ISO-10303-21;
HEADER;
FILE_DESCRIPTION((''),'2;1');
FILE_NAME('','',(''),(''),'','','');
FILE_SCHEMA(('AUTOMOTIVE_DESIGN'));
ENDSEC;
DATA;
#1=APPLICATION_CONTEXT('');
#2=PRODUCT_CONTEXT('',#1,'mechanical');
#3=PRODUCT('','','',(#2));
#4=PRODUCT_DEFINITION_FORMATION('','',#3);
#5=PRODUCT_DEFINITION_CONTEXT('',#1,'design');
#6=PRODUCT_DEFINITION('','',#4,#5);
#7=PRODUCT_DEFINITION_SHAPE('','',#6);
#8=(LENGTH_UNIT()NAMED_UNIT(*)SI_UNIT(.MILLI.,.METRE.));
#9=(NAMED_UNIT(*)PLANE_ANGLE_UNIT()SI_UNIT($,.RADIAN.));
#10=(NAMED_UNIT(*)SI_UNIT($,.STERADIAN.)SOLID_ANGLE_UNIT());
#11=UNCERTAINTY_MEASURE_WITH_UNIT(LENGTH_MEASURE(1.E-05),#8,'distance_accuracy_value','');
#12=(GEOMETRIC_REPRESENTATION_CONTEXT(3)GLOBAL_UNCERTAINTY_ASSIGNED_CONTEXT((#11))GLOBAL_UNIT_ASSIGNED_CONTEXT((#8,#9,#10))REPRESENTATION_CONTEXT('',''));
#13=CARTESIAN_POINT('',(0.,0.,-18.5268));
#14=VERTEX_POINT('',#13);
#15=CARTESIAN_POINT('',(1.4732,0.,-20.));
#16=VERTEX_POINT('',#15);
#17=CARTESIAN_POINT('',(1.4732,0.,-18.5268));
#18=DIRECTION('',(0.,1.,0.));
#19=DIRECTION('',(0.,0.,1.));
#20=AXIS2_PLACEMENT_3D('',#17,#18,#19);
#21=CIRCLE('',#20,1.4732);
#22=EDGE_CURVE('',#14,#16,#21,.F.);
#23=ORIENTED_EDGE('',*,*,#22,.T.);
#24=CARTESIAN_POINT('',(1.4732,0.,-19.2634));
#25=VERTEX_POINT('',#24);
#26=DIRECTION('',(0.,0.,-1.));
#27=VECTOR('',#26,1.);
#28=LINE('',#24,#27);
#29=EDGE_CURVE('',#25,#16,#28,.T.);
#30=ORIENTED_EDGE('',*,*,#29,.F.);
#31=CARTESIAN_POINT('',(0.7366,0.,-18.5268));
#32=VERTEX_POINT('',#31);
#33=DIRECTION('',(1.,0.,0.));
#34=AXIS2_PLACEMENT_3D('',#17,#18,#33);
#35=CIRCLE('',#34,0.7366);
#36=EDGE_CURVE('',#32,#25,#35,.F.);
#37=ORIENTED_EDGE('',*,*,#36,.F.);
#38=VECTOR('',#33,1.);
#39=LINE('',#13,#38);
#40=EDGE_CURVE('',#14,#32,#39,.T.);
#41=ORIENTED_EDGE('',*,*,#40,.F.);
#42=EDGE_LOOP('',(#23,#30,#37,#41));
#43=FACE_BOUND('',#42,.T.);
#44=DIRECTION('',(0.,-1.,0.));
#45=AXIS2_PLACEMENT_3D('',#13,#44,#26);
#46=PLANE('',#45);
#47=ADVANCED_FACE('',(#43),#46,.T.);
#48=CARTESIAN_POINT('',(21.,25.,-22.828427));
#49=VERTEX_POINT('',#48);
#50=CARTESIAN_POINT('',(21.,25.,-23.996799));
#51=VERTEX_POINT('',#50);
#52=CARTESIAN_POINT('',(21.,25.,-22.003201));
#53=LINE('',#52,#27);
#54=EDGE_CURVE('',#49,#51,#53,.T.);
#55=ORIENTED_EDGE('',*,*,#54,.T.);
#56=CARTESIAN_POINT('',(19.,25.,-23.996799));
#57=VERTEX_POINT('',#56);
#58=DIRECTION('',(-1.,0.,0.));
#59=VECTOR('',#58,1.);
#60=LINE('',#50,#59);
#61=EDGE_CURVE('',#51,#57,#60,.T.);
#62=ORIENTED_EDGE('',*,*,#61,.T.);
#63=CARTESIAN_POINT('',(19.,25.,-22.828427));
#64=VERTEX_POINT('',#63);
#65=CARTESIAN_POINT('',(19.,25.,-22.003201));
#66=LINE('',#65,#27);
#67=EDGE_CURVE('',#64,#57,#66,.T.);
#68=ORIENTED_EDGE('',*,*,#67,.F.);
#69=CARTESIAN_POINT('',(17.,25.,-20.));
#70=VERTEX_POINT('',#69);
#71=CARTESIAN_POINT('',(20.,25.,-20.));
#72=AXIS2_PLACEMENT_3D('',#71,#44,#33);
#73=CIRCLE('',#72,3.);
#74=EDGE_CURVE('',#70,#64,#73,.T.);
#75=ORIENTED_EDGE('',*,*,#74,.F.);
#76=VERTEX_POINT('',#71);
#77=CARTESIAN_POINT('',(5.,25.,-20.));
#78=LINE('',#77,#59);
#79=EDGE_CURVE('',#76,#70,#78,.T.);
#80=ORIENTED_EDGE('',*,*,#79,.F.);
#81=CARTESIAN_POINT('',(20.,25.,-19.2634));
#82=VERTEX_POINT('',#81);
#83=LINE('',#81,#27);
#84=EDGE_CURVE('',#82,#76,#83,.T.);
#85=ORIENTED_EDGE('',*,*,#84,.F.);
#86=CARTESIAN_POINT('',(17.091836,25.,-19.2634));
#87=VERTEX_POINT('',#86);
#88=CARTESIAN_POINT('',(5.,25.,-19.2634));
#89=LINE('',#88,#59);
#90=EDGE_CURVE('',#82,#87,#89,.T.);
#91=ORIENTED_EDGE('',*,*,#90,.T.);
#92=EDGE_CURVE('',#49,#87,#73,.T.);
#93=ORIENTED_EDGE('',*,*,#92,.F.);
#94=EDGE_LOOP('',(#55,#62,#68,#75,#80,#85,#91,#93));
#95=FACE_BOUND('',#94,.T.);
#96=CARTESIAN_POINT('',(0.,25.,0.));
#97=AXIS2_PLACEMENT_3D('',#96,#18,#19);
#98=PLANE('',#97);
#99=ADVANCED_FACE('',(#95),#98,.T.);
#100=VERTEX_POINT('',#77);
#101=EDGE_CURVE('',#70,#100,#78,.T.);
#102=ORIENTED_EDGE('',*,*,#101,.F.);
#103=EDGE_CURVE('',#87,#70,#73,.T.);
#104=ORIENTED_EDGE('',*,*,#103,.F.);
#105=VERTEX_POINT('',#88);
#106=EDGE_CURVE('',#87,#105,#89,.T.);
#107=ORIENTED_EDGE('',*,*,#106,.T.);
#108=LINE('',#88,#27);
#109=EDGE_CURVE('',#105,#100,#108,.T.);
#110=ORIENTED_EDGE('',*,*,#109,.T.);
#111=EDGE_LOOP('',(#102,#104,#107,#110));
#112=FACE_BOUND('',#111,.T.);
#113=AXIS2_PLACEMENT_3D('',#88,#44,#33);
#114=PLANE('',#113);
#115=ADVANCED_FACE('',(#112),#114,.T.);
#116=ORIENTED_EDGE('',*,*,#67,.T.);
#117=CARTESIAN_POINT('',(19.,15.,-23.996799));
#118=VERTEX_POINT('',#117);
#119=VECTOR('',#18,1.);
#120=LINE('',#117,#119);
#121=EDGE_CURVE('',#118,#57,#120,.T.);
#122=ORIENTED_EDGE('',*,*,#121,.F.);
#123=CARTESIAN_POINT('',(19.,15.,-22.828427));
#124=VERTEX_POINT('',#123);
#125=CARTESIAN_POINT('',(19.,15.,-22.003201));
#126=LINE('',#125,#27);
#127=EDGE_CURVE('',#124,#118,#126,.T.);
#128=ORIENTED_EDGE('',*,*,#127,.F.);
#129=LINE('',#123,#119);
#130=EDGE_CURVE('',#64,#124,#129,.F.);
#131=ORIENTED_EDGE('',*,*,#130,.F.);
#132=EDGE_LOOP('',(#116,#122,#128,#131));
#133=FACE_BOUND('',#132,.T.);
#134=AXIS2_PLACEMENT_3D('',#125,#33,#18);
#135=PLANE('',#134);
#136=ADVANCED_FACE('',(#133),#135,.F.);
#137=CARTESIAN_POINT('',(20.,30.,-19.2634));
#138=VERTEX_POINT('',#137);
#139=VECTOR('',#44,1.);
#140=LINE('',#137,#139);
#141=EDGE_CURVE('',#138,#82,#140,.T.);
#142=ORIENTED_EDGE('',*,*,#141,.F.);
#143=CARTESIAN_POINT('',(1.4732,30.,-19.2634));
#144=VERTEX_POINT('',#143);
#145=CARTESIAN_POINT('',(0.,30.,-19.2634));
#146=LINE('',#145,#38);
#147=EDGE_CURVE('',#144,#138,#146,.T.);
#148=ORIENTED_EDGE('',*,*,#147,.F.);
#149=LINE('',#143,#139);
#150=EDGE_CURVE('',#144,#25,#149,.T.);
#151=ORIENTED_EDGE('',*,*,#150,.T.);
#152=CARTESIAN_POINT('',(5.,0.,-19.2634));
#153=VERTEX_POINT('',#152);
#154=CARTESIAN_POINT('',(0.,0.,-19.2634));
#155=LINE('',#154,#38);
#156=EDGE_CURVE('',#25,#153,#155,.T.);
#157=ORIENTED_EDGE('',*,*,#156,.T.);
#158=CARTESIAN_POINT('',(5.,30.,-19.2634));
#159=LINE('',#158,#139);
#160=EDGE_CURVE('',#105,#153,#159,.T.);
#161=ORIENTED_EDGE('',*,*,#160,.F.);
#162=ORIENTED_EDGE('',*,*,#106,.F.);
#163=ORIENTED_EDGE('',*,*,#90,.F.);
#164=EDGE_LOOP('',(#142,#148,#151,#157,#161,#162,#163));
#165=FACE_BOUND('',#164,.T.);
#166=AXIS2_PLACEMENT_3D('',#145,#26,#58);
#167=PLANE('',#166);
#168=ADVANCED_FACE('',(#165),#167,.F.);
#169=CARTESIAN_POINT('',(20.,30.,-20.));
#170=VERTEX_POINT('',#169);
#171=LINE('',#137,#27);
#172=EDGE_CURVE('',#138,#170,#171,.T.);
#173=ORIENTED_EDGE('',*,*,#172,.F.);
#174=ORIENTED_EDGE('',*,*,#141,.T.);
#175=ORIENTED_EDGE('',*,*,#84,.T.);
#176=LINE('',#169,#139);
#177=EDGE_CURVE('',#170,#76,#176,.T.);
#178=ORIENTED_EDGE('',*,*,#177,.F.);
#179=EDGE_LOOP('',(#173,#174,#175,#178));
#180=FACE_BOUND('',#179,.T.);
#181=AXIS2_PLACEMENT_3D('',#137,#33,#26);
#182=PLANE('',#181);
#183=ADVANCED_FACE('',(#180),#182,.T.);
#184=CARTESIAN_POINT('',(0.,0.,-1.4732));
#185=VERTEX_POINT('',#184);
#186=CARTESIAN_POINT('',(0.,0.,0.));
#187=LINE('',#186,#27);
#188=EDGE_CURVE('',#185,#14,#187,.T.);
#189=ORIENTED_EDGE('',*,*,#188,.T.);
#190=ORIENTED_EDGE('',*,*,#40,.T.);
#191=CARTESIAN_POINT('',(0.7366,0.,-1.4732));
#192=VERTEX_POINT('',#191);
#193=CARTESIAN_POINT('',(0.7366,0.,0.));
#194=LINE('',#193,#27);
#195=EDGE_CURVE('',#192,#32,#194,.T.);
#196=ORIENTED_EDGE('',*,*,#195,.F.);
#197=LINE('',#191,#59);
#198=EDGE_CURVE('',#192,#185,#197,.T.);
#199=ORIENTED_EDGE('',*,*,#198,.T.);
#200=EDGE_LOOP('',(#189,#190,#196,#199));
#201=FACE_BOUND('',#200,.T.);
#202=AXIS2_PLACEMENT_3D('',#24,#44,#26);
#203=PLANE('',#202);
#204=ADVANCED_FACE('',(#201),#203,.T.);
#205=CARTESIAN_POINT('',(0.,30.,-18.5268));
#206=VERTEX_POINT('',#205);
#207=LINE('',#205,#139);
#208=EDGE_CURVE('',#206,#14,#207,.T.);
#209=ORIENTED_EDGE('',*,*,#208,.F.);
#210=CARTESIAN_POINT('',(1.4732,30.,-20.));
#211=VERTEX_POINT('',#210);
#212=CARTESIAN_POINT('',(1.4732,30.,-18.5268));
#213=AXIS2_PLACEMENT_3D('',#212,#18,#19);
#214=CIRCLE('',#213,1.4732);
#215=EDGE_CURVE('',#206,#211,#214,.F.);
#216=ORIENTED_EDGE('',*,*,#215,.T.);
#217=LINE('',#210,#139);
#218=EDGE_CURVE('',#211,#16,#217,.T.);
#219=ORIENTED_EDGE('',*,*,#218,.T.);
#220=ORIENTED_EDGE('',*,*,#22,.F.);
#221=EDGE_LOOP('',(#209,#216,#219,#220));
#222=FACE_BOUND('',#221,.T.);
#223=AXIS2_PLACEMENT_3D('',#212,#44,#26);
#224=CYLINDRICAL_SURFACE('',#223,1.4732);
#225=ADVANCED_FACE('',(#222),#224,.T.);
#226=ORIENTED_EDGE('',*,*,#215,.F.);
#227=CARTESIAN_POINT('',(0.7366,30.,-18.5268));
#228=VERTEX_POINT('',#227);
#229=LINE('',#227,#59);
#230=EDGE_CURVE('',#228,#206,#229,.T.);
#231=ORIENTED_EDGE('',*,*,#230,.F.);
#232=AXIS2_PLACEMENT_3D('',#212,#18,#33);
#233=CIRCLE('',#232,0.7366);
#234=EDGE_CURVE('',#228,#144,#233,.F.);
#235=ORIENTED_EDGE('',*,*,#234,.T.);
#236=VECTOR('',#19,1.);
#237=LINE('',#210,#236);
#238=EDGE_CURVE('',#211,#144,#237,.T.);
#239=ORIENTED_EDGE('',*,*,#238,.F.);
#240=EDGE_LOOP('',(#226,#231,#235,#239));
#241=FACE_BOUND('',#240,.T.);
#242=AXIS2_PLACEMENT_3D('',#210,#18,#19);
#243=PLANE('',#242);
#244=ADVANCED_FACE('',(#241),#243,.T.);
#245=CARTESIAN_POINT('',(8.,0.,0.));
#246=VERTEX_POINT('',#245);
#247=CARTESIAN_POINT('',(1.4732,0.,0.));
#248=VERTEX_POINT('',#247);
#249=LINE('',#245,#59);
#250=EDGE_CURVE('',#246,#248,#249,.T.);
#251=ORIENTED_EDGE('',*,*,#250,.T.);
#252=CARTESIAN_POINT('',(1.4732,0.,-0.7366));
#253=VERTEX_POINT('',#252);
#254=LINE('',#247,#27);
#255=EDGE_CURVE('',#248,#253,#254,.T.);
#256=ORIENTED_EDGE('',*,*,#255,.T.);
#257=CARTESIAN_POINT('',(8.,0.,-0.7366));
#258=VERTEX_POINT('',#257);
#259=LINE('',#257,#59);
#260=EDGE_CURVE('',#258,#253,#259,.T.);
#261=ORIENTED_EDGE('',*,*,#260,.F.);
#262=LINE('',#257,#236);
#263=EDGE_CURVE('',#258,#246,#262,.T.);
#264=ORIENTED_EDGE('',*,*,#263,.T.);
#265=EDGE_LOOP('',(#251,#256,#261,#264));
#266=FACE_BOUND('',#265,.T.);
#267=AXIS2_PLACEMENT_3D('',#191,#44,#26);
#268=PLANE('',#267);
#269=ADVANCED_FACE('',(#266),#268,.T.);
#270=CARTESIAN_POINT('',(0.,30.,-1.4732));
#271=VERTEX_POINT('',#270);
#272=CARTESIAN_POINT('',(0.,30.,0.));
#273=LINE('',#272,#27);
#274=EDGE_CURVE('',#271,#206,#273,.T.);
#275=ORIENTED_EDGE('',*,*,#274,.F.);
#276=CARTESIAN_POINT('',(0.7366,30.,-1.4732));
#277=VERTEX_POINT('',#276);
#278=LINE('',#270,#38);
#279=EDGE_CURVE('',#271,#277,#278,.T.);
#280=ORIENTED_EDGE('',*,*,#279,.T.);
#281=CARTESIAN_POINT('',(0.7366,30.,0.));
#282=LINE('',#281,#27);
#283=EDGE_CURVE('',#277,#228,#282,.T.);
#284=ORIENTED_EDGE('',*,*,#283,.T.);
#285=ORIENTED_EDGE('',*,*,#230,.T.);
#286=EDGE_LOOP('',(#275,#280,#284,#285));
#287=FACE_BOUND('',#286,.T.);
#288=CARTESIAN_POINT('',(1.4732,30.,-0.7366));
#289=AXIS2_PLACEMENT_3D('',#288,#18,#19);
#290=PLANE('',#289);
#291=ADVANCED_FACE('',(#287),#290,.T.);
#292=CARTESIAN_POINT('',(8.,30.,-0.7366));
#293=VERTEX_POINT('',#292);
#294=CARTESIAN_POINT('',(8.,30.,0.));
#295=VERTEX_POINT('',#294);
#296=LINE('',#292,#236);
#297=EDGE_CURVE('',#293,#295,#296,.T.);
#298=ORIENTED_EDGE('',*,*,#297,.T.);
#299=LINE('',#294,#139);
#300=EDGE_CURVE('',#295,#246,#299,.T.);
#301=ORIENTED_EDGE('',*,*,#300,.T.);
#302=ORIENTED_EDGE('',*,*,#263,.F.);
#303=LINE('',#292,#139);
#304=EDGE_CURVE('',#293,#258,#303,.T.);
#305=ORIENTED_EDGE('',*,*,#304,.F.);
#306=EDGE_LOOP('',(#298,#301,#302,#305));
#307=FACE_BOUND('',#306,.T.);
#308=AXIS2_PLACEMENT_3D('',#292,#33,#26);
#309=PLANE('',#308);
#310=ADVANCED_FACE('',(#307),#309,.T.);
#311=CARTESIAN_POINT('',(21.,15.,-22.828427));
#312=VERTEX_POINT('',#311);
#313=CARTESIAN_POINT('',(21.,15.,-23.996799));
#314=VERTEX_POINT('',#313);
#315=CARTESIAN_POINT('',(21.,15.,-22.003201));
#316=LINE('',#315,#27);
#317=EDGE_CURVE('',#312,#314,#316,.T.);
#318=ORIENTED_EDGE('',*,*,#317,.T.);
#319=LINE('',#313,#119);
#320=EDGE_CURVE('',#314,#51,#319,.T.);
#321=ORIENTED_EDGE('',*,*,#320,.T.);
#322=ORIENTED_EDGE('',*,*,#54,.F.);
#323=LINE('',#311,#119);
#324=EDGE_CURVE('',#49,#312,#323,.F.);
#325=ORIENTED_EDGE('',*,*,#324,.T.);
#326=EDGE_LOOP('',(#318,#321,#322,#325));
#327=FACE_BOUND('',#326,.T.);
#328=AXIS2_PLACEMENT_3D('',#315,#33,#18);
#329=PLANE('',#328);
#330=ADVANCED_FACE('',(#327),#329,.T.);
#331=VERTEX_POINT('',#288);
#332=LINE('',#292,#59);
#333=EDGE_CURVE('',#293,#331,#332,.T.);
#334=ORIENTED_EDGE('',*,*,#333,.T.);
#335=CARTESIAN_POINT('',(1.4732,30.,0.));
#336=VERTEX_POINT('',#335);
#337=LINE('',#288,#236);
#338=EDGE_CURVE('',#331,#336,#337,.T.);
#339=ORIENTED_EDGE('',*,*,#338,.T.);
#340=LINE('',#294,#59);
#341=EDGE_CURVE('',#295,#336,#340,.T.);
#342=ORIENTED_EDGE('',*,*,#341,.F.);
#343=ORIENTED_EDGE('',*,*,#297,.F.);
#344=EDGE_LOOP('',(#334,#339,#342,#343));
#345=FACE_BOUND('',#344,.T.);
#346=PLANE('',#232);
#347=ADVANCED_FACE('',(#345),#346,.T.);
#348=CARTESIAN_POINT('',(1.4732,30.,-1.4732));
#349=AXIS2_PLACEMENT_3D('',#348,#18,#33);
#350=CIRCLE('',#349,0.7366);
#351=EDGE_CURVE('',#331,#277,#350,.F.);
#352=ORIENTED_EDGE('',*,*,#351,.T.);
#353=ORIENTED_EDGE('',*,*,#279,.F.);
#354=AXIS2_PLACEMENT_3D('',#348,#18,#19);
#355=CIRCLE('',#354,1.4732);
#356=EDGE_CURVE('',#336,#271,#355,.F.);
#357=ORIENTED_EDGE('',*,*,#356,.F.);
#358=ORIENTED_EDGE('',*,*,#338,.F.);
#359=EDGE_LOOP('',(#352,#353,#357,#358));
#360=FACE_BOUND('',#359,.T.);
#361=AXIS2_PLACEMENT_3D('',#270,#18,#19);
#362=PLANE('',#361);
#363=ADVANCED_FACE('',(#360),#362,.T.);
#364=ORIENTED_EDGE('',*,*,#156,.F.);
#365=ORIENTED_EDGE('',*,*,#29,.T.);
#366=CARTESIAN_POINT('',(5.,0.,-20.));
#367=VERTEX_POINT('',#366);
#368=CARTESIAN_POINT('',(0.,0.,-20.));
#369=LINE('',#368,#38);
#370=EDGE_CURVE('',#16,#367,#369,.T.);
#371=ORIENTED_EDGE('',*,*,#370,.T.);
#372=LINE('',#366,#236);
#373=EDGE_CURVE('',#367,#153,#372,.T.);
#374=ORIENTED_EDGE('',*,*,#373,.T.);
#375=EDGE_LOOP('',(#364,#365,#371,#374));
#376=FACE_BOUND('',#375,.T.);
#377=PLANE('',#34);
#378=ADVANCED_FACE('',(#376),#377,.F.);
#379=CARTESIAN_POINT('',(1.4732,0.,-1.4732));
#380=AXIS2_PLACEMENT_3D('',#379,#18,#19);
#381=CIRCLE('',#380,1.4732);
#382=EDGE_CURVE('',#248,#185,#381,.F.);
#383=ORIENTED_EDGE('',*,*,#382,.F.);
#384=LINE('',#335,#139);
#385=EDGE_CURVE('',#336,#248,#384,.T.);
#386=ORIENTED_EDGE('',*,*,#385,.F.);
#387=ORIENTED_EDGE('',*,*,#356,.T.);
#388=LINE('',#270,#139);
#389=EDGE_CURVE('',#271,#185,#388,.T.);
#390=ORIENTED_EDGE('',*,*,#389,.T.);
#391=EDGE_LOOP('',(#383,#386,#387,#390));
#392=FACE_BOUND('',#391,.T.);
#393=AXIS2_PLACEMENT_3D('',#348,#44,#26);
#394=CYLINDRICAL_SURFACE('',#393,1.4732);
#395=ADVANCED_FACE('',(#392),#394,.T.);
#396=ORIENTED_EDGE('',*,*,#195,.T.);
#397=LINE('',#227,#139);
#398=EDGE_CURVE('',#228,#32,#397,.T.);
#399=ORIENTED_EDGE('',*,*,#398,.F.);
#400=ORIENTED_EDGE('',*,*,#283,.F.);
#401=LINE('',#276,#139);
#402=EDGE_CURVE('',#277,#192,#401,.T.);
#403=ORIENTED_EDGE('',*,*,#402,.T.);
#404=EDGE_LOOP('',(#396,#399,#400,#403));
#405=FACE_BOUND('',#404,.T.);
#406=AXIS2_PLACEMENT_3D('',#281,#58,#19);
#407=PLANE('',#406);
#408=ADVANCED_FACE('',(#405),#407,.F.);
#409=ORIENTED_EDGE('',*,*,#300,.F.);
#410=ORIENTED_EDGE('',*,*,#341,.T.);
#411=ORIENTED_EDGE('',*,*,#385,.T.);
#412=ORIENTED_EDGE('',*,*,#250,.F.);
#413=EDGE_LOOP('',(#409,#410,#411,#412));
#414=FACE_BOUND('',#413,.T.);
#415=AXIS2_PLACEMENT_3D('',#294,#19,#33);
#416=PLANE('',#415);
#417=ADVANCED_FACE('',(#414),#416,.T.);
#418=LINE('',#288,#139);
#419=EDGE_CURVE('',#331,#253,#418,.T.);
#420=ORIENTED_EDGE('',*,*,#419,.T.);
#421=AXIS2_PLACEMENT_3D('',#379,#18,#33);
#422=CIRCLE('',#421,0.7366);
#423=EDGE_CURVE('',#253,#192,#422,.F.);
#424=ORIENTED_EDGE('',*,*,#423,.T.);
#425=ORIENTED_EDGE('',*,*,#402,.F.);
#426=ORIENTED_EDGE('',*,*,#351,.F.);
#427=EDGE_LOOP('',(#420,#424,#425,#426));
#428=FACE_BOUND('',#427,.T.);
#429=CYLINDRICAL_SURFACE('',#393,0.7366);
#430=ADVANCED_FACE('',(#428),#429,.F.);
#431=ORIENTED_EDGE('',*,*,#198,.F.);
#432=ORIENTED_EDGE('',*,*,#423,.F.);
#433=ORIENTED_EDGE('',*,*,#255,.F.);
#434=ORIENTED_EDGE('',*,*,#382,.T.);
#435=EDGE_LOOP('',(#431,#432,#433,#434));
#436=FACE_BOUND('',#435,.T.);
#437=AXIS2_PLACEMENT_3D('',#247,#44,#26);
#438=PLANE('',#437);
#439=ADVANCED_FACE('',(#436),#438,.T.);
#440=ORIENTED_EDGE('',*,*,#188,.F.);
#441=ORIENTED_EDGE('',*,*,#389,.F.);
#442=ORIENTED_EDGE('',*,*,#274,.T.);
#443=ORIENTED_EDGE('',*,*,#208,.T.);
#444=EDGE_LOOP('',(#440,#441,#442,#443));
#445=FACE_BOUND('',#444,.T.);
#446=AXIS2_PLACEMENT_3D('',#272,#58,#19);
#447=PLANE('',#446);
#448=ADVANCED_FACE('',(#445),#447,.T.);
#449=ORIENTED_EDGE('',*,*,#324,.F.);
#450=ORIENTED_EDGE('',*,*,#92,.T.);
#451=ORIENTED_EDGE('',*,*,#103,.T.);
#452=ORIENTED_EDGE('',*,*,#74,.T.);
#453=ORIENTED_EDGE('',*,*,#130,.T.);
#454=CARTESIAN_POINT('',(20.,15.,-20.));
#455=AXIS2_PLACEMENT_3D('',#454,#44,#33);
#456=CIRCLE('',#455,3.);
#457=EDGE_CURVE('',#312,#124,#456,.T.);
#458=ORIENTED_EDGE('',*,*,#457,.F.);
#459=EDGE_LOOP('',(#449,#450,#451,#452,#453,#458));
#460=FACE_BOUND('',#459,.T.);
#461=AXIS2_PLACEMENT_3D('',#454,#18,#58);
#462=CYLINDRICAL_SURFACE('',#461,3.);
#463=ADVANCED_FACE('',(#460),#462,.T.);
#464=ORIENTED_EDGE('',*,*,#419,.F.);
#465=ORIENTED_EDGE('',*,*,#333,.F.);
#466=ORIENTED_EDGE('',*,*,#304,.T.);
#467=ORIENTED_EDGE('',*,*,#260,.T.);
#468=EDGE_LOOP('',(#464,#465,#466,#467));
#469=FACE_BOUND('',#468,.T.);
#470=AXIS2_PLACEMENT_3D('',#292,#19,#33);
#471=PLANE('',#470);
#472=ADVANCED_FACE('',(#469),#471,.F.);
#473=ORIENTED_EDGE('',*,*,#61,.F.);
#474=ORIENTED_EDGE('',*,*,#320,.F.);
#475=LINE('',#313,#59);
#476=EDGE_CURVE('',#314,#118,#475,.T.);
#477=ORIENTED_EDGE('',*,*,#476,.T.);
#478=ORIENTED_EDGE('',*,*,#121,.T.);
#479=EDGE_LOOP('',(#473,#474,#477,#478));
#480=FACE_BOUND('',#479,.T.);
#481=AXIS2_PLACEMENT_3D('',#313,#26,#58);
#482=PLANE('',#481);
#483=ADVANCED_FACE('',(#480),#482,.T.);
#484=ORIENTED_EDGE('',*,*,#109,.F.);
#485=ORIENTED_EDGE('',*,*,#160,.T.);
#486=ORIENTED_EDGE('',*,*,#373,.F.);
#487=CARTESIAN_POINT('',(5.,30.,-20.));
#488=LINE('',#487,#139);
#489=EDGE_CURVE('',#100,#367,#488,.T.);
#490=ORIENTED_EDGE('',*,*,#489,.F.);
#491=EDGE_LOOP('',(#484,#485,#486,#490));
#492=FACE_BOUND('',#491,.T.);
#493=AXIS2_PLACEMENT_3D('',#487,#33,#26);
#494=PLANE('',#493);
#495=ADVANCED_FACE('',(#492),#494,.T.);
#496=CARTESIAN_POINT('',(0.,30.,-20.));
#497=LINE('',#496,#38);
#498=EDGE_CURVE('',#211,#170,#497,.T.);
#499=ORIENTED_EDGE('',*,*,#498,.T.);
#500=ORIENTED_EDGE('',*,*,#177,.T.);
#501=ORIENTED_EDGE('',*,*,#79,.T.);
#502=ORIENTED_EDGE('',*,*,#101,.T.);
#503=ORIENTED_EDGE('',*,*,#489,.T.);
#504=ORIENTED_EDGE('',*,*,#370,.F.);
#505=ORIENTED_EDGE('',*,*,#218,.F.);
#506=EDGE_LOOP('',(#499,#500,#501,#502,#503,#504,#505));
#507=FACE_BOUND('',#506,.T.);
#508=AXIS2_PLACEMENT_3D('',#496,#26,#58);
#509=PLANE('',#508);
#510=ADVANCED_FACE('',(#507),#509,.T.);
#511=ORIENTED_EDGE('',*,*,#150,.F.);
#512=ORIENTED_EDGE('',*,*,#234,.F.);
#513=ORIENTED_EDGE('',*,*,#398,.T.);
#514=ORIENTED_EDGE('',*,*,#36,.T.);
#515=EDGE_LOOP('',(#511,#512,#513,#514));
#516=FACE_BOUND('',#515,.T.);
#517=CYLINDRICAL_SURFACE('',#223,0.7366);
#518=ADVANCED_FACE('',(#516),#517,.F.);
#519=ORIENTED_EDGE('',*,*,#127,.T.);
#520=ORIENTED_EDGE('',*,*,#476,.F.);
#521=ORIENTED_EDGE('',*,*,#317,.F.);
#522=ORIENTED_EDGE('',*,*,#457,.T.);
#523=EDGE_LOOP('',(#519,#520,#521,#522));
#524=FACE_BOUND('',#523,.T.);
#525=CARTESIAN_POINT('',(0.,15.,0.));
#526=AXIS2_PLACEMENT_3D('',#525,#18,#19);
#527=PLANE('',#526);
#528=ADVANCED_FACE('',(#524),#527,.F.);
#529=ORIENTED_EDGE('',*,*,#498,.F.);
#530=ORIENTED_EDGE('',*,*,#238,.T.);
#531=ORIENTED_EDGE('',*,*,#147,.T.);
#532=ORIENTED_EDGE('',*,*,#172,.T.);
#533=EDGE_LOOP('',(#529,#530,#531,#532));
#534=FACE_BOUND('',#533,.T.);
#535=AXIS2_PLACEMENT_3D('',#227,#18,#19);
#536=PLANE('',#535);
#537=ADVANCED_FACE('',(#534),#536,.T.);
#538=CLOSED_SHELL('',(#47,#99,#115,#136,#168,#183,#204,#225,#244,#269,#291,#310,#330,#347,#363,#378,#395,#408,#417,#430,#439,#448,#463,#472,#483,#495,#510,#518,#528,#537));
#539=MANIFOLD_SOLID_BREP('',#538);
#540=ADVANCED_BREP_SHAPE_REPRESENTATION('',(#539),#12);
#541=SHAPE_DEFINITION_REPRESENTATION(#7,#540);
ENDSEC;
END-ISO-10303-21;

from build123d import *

# Parameters (mm, degrees)
BASE_FLANGE1_DEPTH  = 30
SKETCH6_W           = 15
SKETCH6_H           = 5
TAB1_DEPTH          = 0.7366
SKETCH9_R           = 3
SKETCH9_W           = 2
SKETCH9_H           = 1.993597438
BOSS_EXTRUDE1_DEPTH = 10


# Sheet-metal steps are written as plain solids
with BuildPart() as part:
    # Sketch1 → Base-Flange1 (new body)
    with BuildSketch(Plane(origin=(0, 0, 0), x_dir=(1, 0, 0), z_dir=(0, 1, 0))):
        with BuildLine():
            Line((8, 0), (1.4732, 0))
            ThreePointArc((1.4732, 0), (0.43149029, 0.43149029), (0, 1.4732))
            Line((0, 1.4732), (0, 18.5268))
            ThreePointArc((0, 18.5268), (0.43149029, 19.56850971), (1.4732, 20))
            Line((1.4732, 20), (5, 20))
            Line((5, 20), (5, 19.2634))
            Line((5, 19.2634), (1.4732, 19.2634))
            ThreePointArc((1.4732, 19.2634), (0.952345145, 19.047654855), (0.7366, 18.5268))
            Line((0.7366, 18.5268), (0.7366, 1.4732))
            ThreePointArc((0.7366, 1.4732), (0.952345145, 0.952345145), (1.4732, 0.7366))
            Line((1.4732, 0.7366), (8, 0.7366))
            Line((8, 0.7366), (8, 0))
        make_face()
    extrude(amount=BASE_FLANGE1_DEPTH)

    # Sketch6 → Tab1 (add)
    with BuildSketch(Plane(origin=(0, 0, -20), x_dir=(-1, 0, 0), z_dir=(0, 0, -1))):
        with Locations((-12.5, 27.5)):
            Rectangle(SKETCH6_W, SKETCH6_H)
    extrude(amount=-TAB1_DEPTH)

    # Sketch9 → Boss-Extrude1 (add)
    with BuildSketch(Plane.XZ.offset(-25)):
        with Locations((20, -20)):
            Circle(SKETCH9_R)
        with Locations((20, -23)):
            Rectangle(SKETCH9_W, SKETCH9_H)
    extrude(amount=BOSS_EXTRUDE1_DEPTH)


solid = part.part
